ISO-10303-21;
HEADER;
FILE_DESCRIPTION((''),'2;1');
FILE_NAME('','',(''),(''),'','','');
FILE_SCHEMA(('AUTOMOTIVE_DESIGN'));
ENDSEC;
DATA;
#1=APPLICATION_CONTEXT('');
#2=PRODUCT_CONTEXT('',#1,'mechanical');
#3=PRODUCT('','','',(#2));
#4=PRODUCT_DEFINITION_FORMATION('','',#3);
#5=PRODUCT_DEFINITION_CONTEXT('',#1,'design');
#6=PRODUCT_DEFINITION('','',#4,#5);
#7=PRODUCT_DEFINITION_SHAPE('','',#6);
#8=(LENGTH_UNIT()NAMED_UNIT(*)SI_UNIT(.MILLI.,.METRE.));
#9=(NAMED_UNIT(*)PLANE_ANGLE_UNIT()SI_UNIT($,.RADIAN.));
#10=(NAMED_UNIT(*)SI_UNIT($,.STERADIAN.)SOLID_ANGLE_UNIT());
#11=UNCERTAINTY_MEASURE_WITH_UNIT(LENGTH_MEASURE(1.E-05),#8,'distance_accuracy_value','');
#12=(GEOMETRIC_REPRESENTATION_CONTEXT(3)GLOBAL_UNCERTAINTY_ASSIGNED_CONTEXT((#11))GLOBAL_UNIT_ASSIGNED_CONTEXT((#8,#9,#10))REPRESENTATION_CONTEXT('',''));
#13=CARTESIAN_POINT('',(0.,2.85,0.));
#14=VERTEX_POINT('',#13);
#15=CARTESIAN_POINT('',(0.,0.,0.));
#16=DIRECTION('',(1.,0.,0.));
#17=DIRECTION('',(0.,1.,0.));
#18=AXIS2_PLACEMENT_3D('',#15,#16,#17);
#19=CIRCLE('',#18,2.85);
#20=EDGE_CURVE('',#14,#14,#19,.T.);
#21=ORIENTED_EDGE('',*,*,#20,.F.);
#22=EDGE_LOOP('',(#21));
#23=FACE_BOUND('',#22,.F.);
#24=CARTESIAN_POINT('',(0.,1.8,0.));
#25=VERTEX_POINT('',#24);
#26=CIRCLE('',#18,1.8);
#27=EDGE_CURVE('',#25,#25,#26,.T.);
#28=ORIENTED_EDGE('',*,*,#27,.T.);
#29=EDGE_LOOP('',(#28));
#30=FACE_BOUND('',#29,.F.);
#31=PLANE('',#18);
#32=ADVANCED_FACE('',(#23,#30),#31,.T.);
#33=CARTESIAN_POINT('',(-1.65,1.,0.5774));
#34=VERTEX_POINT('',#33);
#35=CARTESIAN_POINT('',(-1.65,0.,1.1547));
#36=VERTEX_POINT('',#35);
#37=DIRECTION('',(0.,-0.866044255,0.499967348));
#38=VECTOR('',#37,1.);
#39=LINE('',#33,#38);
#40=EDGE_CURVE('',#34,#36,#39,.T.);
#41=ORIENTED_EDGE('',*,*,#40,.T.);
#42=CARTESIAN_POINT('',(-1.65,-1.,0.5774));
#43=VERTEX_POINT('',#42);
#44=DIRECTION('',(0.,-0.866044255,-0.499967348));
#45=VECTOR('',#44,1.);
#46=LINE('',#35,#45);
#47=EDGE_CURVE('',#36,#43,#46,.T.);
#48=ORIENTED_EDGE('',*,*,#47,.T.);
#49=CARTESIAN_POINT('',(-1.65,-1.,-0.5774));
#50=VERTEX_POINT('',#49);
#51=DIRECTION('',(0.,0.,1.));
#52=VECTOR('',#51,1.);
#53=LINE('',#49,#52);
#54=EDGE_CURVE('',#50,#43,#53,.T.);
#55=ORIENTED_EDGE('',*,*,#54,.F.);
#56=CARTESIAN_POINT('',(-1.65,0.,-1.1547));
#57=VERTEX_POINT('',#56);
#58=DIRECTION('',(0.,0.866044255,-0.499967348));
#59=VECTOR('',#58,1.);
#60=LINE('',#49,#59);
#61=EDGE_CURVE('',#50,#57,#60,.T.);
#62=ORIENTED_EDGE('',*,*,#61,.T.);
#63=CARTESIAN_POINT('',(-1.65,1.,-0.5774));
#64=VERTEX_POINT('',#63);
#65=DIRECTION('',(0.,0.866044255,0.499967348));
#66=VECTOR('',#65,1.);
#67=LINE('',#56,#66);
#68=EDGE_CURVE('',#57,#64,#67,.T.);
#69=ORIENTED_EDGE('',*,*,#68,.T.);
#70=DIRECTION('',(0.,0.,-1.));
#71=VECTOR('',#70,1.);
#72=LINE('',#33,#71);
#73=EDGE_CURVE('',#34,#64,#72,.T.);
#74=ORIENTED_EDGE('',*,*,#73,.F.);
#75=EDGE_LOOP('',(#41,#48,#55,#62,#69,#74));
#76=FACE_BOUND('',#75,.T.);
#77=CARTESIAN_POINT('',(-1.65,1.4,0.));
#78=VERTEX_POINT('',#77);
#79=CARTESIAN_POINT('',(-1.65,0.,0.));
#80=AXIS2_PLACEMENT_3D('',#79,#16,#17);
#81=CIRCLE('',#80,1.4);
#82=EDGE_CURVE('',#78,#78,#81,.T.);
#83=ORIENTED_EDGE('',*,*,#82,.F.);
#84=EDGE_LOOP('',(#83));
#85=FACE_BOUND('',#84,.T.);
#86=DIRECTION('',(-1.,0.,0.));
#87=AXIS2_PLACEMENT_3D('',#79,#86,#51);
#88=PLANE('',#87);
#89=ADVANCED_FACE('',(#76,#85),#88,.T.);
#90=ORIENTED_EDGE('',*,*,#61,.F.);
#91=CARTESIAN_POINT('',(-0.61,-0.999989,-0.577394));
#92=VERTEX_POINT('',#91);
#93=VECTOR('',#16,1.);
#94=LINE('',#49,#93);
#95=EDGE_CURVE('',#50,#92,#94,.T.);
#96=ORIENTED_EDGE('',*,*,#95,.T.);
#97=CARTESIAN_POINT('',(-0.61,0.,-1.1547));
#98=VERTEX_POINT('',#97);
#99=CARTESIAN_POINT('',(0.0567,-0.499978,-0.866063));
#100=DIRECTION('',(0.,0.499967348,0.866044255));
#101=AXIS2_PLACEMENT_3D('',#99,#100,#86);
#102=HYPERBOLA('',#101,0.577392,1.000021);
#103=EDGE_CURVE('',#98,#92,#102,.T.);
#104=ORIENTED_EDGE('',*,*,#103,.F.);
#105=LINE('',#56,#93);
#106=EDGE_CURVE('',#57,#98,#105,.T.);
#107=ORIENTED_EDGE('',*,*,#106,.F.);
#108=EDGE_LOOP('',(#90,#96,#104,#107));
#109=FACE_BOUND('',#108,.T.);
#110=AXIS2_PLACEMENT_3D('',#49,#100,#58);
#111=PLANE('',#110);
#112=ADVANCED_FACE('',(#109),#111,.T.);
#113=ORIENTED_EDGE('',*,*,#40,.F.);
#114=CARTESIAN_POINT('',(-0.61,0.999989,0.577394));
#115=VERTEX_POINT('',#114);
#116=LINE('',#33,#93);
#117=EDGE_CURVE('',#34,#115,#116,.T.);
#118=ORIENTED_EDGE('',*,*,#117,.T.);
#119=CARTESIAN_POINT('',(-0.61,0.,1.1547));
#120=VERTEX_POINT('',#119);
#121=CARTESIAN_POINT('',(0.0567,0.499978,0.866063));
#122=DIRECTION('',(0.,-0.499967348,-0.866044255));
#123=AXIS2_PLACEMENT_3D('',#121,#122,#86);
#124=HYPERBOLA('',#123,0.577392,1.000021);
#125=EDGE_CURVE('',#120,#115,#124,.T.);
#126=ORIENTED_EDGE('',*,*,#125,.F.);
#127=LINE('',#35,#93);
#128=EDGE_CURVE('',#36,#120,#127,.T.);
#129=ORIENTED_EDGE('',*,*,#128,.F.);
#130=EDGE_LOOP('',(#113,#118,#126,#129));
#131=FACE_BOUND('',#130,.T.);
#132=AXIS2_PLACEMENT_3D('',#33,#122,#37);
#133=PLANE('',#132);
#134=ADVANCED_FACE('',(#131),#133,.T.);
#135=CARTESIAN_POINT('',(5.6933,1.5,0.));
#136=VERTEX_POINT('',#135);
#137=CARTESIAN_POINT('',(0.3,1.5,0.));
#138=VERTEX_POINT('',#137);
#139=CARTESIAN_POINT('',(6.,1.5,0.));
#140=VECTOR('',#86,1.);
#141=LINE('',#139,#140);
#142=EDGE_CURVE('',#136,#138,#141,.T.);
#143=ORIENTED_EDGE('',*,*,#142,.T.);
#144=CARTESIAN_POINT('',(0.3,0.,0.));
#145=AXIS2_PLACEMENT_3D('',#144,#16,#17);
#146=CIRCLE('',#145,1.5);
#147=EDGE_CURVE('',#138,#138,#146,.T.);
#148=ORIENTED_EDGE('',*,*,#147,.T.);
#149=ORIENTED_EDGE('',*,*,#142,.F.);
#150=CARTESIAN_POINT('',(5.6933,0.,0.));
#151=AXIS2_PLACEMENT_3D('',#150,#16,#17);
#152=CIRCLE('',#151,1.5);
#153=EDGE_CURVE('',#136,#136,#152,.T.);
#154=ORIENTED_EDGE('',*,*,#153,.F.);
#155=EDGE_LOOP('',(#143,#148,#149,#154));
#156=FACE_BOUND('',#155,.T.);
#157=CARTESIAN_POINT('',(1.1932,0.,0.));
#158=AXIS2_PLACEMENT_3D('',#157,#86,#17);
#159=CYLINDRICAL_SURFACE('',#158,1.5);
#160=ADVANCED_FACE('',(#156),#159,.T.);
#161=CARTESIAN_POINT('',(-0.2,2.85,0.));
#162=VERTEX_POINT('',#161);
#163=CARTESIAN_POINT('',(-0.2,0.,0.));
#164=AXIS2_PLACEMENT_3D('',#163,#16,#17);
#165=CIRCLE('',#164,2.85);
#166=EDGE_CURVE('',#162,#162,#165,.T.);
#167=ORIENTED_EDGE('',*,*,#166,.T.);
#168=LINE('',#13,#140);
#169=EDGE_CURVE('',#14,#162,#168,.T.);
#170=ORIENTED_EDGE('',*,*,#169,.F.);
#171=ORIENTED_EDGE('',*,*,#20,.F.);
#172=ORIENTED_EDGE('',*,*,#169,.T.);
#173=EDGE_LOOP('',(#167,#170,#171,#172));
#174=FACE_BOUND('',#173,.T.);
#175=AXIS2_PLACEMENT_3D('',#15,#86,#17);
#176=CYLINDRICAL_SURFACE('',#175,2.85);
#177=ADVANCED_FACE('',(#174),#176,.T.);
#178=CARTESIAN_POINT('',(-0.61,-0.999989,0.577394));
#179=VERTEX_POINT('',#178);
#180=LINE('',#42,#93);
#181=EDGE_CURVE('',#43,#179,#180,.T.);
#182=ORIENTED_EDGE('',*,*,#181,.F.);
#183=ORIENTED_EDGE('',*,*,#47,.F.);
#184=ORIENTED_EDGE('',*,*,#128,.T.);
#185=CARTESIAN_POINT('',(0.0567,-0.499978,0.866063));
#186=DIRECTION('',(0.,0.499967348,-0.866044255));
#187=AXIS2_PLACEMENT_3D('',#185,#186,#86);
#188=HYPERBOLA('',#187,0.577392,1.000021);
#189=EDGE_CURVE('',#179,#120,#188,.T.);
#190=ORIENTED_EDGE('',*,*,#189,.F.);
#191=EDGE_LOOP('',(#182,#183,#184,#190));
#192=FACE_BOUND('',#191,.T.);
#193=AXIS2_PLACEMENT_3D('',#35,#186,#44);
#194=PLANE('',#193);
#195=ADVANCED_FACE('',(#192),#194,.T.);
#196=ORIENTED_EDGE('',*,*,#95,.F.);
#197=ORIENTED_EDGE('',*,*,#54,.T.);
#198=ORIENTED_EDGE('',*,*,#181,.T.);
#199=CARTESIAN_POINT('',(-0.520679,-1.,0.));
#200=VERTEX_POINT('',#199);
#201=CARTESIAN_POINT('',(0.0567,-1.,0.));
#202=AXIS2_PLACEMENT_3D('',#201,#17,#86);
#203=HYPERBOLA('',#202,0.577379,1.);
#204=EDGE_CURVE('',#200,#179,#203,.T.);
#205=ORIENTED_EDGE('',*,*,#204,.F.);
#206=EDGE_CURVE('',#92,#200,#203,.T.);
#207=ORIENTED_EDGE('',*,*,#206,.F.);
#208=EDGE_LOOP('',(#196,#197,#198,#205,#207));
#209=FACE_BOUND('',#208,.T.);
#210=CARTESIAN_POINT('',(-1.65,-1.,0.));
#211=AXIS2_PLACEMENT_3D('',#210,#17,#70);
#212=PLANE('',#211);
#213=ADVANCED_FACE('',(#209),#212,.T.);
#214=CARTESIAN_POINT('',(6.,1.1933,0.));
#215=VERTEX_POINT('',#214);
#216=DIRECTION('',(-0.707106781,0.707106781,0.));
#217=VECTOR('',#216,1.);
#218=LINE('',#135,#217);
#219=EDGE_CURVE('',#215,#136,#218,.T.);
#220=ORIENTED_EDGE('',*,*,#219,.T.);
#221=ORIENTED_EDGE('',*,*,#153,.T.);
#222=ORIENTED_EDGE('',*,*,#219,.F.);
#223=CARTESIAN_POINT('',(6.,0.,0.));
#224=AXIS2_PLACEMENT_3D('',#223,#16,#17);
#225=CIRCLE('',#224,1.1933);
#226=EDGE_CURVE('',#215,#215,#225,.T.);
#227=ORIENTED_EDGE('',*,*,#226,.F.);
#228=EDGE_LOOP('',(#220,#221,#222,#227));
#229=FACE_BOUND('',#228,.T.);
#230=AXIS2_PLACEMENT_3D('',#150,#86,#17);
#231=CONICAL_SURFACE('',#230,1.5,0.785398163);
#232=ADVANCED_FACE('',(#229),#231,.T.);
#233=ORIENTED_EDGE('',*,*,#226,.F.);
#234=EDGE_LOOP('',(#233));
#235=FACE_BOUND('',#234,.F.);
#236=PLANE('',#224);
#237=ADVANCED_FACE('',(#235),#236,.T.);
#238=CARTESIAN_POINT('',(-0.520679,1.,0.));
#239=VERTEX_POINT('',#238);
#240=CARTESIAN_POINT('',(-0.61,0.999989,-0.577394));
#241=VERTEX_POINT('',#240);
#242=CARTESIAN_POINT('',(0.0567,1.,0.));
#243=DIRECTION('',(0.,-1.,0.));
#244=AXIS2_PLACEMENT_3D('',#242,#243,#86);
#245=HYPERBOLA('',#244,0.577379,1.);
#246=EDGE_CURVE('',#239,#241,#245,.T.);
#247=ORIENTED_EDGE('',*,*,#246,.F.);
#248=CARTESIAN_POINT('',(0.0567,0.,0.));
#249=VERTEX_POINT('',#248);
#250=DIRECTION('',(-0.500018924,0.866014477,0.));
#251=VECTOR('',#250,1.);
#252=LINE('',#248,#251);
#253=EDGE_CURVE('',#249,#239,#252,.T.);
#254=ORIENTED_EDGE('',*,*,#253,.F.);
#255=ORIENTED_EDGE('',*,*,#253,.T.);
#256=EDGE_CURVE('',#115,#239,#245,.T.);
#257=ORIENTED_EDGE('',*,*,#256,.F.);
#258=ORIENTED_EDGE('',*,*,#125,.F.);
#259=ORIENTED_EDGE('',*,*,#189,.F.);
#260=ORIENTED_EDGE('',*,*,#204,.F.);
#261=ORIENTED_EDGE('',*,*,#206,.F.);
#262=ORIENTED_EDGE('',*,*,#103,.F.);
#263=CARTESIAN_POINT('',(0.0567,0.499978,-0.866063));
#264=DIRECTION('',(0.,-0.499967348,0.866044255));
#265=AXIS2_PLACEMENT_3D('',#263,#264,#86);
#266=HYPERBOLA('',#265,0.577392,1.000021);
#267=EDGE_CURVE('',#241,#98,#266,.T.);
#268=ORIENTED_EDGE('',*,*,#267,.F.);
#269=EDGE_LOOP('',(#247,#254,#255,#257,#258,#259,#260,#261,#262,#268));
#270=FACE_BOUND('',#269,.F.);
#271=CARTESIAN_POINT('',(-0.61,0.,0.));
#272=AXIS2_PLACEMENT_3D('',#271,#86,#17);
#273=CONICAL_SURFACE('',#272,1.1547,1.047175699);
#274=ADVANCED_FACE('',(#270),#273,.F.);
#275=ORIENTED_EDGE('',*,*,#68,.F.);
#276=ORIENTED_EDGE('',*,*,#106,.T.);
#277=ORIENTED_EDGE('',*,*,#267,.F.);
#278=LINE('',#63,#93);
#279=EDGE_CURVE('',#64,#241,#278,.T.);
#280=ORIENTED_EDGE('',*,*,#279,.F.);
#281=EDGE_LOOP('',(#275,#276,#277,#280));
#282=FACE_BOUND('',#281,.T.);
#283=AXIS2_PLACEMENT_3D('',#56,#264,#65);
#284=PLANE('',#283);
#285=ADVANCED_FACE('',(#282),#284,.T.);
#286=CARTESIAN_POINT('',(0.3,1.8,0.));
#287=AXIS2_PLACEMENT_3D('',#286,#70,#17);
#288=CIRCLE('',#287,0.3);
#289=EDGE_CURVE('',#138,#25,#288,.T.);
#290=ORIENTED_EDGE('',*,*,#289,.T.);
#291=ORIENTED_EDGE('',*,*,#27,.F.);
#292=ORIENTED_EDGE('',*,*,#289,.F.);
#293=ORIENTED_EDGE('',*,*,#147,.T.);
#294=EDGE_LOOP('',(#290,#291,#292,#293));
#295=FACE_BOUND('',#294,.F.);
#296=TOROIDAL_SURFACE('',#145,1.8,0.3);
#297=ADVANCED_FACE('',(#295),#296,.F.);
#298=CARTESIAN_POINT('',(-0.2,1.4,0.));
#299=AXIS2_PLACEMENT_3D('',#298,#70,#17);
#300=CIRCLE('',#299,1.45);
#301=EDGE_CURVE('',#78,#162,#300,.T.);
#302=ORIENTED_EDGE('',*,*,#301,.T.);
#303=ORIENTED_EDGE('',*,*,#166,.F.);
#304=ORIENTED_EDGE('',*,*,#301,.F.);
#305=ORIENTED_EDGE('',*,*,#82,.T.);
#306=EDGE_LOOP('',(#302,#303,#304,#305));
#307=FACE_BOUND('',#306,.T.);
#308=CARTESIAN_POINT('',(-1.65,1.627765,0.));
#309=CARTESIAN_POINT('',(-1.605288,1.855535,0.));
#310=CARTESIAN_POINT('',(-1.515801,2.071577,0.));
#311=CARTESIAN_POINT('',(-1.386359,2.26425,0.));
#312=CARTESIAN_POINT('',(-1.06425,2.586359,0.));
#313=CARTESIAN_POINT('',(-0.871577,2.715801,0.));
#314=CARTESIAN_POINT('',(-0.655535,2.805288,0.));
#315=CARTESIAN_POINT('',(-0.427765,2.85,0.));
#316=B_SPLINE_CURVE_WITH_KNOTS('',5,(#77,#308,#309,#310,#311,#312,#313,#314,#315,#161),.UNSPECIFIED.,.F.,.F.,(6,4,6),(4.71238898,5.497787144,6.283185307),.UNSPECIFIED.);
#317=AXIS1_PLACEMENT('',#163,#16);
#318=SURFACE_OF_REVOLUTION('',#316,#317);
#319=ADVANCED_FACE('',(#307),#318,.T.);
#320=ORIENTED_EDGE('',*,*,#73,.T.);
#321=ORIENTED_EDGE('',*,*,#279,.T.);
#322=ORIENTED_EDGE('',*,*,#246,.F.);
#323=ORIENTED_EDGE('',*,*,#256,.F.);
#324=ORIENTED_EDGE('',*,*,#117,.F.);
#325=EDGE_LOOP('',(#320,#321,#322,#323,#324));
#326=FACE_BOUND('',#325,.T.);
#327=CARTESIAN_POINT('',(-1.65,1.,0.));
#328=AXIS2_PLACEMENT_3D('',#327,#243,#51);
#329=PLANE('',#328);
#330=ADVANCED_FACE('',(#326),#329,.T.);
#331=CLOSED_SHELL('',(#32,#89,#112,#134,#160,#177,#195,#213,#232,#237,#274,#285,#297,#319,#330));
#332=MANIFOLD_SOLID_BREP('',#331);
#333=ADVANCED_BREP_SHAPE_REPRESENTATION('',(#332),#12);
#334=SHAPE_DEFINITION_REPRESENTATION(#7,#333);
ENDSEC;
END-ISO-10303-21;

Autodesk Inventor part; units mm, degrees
ref_plane "YZ Plane" through (0, 0, 0) normal (1, 0, 0) x (0, 1, 0)
ref_plane "XZ Plane" through (0, 0, 0) normal (0, 1, 0) x (-1, 0, 0)
sketch "Sketch1" plane through (0, 0, 0) normal (0, 0, 1) x (1, 0, 0)
  line L0 (0.0567, 0) -> (6, 0)
  line L1 (6, 0) -> (6, 1.5)
  line L2 (6, 1.5) -> (1.5, 1.5)
  line L3 (1.5, 1.5) -> (1.1932, 1.5)
  line L4 (1.1932, 1.5) -> (0, 1.5)
  line L5 (0, 1.5) -> (0, 2.85)
  line L6 (0, 2.85) -> (-1.65, 2.85)
  line L7 (-1.65, 2.85) -> (-1.65, 1.1547)
  line L8 (-1.65, 1.1547) -> (-0.61, 1.1547)
  line L9 (-0.61, 1.1547) -> (0.0567, 0)
  line L10 (-3.18, 0) -> (7.53, 0) projected
  line L11 (0, -0.57) -> (0, 3.42) projected
  line L12 (1.5, 1.5) -> (0, 1.5) construction
  dimension "d1" = 4.5
  dimension "d2" = 0.3068
  dimension "d3" = 1.65
  dimension "d4" = 1.04
  dimension "d5" = 60
  dimension "d6" = 3
  dimension "d7" = 3
  dimension "d8" = 2.3094
  dimension "d9" = 5.7
  dimension "d26" = 6
revolve "Body" add sketch "Sketch1" angle 360 about axis through (0.0567, 0, 0) along (1, 0, 0) contours L9 L11 L4 L3 L2 L1 L0 | L9 L8 L7 L6 L5 L11
sketch "Sketch2" plane through (-1.65, 0, 0) normal (-1, 0, 0) x (0, 0, 1)
  circle A0 centre (0, 0) radius 1.1547 projected
  line L0 (0, -3.99) -> (0, 3.99) projected
  line L1 (-3.99, 0) -> (3.99, 0) projected
  line L2 (1.1547, 0) -> (0.5774, -1)
  line L3 (0.5774, -1) -> (-0.5774, -1)
  line L4 (-0.5774, -1) -> (-1.1547, 0)
  line L5 (-1.1547, 0) -> (-0.5774, 1)
  line L6 (-0.5774, 1) -> (0.5774, 1)
  line L7 (0.5774, 1) -> (1.1547, 0)
extrude "Slot" add sketch "Sketch2" against normal up to next contours L7 A0 | A0 L2 | L6 L0 A0 | A0 L0 L3 | L0 L6 A0 | A0 L3 L0 | L4 A0 | A0 L5
fillet "Fillet1" radius 1.45 1 edges at (-1.65, -2.85, 0)
thread "Thread" size "M3x0.5" class "6g" standard "ISO Metric profile" length 4.5
chamfer "Chamfer1" distance 0.3067 distance2 0.3067 1 edges at (6, -1.5, 0) measured on face at (6, -0.2617, -0.7882)
ref_plane "Work Plane1" through (29, 0, 0) normal (0, -1, 0) x (1, 0, 0)
fillet "Fillet2" radius 0.3 1 edges at (0, -1.5, 0)
equation "\"d30\" = R"
equation "\"d17\" = RR"
equation "\"d13\" = GEL"
equation "\"d15\" = -0.5 * SPD + 0.5 * GD"
equation "\"d16\" = GUL"
equation "\"d1\" = GEL"
equation "\"d3\" = KOH"
equation "\"d4\" = INTI"
equation "\"d6\" = GD"
equation "\"d7\" = BDM"
equation "\"d8\" = 1.1547 * SW"
equation "\"d9\" = KOD"
equation "\"d26\" = NLG"
equation "\"GD\" = NND"
equation "\"NLG\" = 6"
equation "\"GEL\" = 4.5"
equation "\"KOD\" = 5.7"
equation "\"KOH\" = 1.65"
equation "\"INTI\" = 1.04"
equation "\"GAL\" = 0.61345 * PTC"
equation "\"GUL\" = 0.61345 * PTC"
equation "\"BDM\" = NND"
equation "\"SW\" = 2"
equation "\"RR\" = 1.45"
equation "\"SPD\" = NND - 1.2269 * PTC"
equation "\"R\" = 0.3"
equation "\"TOA\" = 30deg"
equation "\"GD1\" = THREADDIA - 1.2269 * PTC"
equation "\"THREADDIA\" = 3"
equation "\"PTC\" = 0.5"
equation "\"NND\" = 3"
equation "\"KOH1\" = 0.2"
equation "\"E0\" = 2.303"
properties part number "ISO 7380-1 - M3 x 6" material "Steel"
